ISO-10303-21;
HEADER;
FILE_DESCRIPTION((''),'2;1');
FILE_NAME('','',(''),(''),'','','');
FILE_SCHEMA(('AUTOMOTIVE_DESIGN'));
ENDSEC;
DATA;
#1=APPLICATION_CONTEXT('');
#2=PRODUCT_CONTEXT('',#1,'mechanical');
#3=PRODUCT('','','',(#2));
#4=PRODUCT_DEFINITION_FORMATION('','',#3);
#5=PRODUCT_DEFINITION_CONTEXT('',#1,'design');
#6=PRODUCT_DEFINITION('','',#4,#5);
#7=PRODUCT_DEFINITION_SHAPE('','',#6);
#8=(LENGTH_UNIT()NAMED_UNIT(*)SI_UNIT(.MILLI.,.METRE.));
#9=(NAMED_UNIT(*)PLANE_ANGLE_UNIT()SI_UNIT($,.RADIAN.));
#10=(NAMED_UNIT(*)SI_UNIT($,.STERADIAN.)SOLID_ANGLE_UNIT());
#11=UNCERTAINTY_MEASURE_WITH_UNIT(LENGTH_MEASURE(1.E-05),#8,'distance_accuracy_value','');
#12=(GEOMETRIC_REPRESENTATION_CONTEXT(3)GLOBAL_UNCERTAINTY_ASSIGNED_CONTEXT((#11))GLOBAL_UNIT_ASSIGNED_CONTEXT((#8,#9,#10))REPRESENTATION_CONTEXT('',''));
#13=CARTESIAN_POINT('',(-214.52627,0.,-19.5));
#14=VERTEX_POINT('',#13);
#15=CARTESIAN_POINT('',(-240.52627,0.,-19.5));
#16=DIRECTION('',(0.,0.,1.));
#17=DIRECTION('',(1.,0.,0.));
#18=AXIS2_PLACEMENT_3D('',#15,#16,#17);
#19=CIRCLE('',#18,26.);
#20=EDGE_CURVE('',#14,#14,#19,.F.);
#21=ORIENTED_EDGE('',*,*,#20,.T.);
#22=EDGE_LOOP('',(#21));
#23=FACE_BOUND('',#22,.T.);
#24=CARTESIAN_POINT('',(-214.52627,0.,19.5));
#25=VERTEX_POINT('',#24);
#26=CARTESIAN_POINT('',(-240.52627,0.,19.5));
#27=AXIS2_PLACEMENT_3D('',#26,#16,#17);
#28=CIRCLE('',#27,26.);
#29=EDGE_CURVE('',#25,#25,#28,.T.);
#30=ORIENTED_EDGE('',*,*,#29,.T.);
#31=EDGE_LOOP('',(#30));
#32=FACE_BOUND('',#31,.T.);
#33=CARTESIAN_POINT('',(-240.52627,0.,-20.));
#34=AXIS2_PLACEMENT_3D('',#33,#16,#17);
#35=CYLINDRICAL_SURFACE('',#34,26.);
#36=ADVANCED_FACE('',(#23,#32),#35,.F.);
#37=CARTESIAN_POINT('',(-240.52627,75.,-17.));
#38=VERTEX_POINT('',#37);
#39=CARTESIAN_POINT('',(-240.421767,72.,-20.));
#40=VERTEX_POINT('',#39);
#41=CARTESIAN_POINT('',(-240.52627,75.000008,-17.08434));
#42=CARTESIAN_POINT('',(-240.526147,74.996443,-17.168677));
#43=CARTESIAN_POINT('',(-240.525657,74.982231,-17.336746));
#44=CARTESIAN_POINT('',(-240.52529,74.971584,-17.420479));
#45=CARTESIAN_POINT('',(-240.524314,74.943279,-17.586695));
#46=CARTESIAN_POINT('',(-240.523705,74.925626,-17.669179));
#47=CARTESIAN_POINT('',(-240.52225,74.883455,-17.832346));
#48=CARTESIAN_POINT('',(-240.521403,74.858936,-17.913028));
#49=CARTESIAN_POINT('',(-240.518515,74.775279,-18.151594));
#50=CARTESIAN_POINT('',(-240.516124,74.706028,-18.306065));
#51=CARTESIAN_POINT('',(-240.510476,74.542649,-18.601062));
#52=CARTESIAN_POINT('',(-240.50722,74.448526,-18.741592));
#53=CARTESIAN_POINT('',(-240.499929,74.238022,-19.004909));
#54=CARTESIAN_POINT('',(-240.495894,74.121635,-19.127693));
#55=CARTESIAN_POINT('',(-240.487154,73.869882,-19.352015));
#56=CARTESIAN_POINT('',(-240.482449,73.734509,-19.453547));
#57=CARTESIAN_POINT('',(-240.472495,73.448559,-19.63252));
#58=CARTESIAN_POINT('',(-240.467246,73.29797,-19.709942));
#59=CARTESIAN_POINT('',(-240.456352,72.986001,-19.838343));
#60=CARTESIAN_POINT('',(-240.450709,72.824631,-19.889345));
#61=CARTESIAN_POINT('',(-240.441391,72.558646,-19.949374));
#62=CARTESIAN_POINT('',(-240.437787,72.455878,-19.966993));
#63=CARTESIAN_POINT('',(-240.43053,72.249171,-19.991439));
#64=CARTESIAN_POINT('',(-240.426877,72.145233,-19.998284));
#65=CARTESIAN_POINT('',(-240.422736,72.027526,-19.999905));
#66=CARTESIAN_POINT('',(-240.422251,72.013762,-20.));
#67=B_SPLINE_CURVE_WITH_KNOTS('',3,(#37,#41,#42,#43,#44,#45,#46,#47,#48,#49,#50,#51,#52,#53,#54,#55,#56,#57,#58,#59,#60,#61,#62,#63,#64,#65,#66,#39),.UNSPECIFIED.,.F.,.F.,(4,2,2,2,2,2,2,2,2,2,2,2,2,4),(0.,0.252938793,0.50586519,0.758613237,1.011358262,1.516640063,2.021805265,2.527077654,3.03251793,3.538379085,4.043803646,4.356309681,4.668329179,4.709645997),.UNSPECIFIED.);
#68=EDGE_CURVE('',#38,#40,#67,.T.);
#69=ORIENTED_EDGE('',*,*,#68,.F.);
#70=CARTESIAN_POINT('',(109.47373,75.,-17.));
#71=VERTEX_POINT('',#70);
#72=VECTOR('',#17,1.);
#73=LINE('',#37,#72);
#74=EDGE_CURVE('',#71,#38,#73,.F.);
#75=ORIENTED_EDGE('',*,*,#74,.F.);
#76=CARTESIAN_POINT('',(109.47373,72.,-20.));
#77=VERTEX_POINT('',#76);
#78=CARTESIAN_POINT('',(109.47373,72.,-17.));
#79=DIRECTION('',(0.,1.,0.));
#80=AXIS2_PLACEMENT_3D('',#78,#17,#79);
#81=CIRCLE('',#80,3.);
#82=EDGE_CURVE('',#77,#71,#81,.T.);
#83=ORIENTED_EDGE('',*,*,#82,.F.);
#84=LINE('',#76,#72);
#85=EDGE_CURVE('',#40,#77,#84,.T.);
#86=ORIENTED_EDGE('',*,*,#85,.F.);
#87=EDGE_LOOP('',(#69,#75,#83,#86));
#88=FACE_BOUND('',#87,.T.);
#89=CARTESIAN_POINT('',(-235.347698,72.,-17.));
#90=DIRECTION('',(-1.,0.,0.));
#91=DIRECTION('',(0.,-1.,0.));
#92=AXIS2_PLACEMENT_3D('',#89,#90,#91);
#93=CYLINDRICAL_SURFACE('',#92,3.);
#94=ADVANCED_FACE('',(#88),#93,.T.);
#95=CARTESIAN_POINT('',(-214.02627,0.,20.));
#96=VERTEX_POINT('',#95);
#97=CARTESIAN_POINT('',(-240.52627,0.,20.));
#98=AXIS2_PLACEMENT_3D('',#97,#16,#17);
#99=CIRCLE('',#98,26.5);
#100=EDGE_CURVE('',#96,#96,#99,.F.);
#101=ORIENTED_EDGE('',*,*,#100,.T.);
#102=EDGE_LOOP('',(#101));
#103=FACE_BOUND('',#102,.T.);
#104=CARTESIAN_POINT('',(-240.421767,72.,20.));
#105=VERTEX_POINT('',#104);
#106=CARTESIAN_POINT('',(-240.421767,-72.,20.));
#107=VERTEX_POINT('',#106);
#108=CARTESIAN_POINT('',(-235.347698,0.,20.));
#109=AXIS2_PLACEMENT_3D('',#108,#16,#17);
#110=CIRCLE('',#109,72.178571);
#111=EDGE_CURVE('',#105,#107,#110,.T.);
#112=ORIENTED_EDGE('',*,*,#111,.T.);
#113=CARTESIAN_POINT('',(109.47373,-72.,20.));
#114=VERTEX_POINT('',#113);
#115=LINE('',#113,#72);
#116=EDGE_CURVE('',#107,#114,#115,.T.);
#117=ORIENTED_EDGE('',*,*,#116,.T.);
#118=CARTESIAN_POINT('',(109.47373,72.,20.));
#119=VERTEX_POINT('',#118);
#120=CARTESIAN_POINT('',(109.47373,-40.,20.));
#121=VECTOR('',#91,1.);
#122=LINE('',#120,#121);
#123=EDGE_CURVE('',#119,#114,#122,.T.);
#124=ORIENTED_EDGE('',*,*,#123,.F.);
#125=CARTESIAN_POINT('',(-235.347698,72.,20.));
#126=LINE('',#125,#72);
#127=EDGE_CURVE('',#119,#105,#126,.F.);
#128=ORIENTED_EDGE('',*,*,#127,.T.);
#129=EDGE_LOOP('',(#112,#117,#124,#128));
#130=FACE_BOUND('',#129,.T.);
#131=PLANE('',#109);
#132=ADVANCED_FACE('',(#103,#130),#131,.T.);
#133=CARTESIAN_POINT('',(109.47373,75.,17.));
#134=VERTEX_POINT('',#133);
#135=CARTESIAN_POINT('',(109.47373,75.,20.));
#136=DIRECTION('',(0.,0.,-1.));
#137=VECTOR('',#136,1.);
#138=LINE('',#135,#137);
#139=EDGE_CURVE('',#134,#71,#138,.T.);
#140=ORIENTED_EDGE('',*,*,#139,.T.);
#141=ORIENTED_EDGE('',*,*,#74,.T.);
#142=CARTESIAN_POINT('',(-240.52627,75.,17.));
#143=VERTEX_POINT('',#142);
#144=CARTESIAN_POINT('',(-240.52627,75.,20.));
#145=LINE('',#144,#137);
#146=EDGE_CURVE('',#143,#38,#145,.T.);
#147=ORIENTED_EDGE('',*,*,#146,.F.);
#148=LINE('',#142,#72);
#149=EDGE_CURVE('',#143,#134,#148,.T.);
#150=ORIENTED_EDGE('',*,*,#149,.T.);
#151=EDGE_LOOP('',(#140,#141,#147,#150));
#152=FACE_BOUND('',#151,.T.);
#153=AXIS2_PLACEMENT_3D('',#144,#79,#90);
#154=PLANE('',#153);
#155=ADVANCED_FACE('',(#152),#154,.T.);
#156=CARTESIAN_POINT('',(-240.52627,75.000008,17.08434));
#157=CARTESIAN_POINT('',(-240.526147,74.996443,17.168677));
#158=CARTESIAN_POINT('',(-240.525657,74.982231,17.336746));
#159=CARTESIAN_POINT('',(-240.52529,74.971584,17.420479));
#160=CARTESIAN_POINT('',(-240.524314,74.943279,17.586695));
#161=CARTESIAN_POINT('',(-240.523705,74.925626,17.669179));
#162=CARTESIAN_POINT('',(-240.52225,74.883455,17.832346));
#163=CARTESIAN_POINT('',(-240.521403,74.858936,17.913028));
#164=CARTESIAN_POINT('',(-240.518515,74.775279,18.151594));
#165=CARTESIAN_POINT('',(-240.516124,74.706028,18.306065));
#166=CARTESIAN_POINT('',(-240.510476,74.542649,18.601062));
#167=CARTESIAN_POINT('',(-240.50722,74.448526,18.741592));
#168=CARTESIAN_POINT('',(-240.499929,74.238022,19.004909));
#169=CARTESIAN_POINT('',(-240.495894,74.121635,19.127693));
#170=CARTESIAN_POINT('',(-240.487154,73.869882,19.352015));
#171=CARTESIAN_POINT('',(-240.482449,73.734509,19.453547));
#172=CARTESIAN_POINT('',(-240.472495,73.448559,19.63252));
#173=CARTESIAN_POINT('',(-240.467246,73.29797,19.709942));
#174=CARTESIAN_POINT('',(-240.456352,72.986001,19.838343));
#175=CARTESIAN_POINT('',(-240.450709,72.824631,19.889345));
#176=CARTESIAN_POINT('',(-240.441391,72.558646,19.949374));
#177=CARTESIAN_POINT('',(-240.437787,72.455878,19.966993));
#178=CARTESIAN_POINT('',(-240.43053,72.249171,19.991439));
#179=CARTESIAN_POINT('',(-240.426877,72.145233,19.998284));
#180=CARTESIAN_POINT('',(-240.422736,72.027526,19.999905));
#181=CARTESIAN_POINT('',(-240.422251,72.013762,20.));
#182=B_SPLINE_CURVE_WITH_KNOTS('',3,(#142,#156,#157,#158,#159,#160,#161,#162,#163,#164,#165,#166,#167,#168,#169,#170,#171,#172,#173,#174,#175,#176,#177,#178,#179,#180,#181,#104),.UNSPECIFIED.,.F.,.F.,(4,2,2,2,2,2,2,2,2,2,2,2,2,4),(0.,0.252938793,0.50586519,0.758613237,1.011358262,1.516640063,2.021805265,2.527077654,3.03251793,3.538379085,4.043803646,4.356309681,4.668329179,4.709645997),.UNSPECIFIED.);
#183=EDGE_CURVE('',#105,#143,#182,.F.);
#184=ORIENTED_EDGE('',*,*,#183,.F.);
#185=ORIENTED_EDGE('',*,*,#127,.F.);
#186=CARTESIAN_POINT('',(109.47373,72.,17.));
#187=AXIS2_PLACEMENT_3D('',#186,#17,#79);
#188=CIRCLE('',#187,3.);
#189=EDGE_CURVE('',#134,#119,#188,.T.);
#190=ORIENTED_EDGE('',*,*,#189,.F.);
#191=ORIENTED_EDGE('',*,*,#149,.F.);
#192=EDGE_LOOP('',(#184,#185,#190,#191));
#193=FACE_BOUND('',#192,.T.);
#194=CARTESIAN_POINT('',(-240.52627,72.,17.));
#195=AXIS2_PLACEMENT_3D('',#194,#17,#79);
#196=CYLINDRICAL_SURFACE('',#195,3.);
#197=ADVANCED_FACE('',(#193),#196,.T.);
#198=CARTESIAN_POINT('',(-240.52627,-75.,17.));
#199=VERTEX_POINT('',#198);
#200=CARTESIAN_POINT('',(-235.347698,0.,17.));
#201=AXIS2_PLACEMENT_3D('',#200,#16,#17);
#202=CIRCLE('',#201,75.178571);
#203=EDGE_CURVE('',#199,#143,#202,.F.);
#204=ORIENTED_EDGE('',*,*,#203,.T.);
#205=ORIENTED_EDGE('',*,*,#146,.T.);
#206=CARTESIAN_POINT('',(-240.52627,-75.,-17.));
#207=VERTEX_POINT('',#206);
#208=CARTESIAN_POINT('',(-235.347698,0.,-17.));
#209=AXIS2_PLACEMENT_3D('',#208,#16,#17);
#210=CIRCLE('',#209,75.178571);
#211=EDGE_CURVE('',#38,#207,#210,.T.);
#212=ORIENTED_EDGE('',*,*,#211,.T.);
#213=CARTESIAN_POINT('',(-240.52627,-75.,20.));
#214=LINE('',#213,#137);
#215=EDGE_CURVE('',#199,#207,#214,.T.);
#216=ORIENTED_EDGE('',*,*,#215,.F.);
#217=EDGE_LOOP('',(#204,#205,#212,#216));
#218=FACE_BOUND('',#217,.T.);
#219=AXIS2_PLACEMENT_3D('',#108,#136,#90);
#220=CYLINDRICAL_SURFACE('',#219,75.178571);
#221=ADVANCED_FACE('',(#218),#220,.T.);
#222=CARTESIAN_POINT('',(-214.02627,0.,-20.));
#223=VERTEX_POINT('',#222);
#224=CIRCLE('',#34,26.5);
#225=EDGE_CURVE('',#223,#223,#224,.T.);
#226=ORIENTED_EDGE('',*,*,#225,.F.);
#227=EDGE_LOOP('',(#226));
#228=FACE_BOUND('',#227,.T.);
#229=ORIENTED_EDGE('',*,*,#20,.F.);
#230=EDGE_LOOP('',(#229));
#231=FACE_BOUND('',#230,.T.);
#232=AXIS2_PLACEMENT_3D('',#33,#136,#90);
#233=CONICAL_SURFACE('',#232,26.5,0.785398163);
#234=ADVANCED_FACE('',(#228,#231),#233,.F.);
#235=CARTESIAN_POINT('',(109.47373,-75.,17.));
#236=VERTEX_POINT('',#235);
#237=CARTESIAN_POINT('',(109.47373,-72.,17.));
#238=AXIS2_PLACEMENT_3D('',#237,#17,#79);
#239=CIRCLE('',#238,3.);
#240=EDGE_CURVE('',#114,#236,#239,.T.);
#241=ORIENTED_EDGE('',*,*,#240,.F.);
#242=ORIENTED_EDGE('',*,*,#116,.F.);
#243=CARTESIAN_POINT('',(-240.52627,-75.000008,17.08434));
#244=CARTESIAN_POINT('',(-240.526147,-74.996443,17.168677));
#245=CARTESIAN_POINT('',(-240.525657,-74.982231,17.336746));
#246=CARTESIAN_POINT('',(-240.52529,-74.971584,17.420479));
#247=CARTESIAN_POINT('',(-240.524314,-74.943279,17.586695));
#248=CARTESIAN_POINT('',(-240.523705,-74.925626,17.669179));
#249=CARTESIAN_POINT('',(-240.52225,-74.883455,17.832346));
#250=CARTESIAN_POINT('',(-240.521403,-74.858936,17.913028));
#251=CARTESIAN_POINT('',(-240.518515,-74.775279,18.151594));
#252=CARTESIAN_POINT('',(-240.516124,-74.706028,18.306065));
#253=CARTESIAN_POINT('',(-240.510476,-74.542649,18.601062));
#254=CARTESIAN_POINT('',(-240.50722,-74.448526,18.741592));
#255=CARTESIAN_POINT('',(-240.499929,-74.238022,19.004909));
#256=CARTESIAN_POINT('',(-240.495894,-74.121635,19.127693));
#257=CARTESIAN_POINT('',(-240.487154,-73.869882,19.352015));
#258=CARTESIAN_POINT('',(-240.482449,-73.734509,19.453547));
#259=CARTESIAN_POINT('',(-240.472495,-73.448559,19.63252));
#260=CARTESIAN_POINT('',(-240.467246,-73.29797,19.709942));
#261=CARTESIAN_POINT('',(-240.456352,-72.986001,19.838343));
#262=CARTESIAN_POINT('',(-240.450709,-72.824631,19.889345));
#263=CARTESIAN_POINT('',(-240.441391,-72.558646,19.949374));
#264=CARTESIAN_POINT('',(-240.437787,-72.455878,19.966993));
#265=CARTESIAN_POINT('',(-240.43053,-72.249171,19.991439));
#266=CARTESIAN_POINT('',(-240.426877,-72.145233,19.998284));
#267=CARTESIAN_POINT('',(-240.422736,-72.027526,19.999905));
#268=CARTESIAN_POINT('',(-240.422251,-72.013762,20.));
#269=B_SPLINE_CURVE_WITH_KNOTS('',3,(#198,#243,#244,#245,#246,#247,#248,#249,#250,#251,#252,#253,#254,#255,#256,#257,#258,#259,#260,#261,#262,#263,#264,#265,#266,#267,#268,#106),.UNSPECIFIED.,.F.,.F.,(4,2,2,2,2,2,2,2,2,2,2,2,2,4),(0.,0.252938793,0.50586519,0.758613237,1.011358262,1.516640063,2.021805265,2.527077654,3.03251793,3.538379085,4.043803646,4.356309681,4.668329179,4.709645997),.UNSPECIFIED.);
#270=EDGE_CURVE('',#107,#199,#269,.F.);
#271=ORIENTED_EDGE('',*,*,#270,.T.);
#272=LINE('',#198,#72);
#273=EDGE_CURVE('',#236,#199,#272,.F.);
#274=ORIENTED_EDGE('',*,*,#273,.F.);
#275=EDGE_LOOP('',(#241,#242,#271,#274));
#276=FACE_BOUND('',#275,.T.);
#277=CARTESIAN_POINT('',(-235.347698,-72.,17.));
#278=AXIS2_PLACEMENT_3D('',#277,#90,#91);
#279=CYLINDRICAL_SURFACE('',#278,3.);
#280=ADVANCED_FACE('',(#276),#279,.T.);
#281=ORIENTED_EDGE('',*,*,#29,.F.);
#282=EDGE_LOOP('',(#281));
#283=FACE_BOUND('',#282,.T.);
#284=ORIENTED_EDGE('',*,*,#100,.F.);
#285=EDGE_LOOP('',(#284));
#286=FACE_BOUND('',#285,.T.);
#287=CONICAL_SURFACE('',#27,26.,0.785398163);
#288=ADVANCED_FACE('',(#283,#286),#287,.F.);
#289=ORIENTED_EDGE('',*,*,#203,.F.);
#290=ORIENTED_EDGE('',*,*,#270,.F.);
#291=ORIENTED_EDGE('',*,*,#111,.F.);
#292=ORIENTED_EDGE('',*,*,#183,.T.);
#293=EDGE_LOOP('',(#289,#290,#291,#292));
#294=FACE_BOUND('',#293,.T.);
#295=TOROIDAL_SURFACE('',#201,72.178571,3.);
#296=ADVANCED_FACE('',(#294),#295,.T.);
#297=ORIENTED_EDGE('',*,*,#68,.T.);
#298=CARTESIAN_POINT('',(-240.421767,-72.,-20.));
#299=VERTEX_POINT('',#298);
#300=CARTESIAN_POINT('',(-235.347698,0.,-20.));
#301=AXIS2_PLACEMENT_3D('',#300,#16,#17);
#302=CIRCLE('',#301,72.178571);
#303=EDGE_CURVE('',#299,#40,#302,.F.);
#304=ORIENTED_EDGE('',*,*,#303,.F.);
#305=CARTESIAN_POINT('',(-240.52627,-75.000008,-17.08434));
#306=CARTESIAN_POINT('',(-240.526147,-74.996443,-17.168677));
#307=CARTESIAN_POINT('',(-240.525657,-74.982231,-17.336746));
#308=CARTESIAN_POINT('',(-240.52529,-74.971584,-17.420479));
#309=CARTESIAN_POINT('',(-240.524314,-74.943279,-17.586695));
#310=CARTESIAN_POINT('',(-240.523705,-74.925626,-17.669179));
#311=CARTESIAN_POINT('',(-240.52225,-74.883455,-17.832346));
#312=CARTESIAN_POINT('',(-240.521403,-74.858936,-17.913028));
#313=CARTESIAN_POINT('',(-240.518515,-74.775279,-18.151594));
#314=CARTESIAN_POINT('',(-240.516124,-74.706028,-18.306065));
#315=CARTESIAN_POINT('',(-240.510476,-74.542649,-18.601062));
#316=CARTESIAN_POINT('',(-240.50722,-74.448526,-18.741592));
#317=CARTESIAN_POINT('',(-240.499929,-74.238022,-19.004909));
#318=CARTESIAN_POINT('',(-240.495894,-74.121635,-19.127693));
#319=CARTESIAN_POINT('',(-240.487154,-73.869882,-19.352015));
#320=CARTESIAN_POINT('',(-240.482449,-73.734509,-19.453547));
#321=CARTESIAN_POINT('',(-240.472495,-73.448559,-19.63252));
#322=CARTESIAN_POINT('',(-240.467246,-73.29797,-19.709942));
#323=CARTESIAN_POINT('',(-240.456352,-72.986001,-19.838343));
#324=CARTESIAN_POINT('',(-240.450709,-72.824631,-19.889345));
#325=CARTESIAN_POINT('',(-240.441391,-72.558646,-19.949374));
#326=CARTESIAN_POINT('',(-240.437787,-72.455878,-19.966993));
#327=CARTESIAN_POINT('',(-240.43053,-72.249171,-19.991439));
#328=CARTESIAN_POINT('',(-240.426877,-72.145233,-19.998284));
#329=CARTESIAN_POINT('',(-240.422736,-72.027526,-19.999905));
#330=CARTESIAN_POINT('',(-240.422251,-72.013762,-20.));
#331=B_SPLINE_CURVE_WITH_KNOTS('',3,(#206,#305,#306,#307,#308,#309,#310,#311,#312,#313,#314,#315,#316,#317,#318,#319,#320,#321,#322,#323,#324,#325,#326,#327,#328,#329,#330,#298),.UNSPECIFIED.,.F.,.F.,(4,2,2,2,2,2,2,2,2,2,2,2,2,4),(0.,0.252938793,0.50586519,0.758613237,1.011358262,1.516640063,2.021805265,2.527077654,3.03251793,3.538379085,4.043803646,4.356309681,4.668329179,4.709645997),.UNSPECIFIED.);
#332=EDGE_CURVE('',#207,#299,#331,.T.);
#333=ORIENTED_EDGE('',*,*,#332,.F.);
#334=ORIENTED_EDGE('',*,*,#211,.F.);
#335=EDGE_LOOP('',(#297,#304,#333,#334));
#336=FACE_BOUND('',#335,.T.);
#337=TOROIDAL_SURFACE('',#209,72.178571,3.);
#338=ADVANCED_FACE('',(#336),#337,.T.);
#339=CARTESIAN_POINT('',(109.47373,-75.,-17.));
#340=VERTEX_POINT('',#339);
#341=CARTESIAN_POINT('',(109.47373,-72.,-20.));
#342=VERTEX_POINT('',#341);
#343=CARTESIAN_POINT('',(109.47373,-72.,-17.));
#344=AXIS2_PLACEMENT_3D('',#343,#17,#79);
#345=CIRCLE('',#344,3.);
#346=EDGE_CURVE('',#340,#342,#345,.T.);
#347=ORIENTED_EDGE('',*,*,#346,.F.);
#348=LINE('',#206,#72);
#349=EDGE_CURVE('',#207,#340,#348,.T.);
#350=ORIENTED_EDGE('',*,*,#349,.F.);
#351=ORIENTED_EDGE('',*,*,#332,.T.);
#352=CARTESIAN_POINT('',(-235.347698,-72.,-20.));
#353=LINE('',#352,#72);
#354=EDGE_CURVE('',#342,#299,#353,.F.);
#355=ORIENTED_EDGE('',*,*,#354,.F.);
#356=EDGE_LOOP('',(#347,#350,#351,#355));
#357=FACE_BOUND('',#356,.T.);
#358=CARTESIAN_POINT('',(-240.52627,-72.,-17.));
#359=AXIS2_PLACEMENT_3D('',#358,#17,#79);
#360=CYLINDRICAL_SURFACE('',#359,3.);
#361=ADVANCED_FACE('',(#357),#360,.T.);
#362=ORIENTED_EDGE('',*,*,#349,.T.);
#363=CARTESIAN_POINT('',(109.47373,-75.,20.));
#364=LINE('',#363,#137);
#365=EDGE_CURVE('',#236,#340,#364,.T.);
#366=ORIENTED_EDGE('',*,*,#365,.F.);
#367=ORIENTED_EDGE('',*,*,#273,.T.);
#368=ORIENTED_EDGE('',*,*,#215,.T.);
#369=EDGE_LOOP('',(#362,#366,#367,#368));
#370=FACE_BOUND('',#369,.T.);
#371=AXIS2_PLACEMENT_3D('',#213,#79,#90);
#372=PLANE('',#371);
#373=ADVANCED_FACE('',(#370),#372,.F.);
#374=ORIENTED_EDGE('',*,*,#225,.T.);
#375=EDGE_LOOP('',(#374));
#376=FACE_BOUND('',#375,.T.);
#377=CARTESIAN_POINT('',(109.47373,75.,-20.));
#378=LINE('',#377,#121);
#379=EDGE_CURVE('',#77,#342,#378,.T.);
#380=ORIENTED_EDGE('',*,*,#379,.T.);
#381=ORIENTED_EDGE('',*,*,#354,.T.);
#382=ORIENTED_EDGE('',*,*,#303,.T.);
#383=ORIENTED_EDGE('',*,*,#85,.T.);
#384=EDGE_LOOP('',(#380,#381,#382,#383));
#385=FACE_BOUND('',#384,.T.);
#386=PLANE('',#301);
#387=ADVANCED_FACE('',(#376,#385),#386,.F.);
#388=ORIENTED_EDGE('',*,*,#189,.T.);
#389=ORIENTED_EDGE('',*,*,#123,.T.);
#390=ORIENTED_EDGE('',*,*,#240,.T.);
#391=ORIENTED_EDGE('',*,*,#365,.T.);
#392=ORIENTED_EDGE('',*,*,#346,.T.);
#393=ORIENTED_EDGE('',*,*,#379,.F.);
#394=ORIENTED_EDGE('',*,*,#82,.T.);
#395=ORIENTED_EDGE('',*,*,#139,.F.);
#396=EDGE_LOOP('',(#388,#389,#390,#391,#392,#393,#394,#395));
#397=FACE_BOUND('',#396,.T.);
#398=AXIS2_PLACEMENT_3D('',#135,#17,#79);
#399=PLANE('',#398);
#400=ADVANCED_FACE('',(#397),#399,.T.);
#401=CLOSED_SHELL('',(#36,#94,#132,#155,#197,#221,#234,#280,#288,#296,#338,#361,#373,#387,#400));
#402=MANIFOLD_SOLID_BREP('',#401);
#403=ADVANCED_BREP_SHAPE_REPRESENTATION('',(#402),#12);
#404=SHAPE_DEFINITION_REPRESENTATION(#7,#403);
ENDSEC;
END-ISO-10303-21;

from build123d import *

# Parameters (mm, degrees)
BOSS_EXTRUDE1_DEPTH = 20
SKETCH2_R           = 26
CUT_EXTRUDE1_DEPTH  = 40
SKETCH3_W           = 155.054117715
SKETCH3_H           = 119.807274711
BOSS_EXTRUDE2_DEPTH = 40
FILLET1_R           = 3
CHAMFER1_SIZE       = 0.5


with BuildPart() as part:
    # Sketch1 → Boss-Extrude1 (new, symmetric)
    with BuildSketch(Plane.XY):
        with BuildLine():
            Line((-240.526269825, 75), (109.473730175, 75))
            Line((109.473730175, 75), (109.473730175, 40))
            Line((109.473730175, 40), (-20.526269825, 40))
            Line((-20.526269825, 40), (-20.526269825, -40))
            Line((-20.526269825, -40), (109.473730175, -40))
            Line((109.473730175, -40), (109.473730175, -75))
            Line((109.473730175, -75), (-240.526269825, -75))
            ThreePointArc((-240.526269825, -75), (-310.526269825, 0), (-240.526269825, 75))
        make_face()
    extrude(amount=BOSS_EXTRUDE1_DEPTH, both=True)

    # Sketch2 → Cut-Extrude1 (cut)
    with BuildSketch(Plane.XY.offset(20)):
        with Locations((-240.526269825, 0)):
            Circle(SKETCH2_R)
    extrude(amount=-CUT_EXTRUDE1_DEPTH, mode=Mode.SUBTRACT)

    # Sketch3 → Boss-Extrude2 (add, through all)
    with BuildSketch(Plane.XY.offset(20)):
        with Locations((31.946671317, -2.166338184)):
            Rectangle(SKETCH3_W, SKETCH3_H)
    extrude(amount=-BOSS_EXTRUDE2_DEPTH)

    # Fillet1
    # the kernel refuses this fillet: 3 mm, written as the material it takes off along each edge
    with BuildSketch(Plane(origin=(116.973730175, -75, -20), x_dir=(0, 0, 1), z_dir=(-1, 0, 0)), Plane(origin=(116.973730175, -75, 20), x_dir=(0, 1, 0), z_dir=(-1, 0, 0)), Plane(origin=(-248.026269825, 75, -20), x_dir=(0, 0, 1), z_dir=(1, 0, 0))) as fillet1_piece_1:
        with BuildLine():
            CenterArc((FILLET1_R, FILLET1_R), FILLET1_R, 180, 90)
            Line((0, FILLET1_R), (0, 0))
            Line((0, 0), (FILLET1_R, 0))
        make_face()
    extrude(amount=365, mode=Mode.SUBTRACT)
    with BuildSketch(Plane(origin=(-235.347698397, 0, -20), x_dir=(0.03096596678063506, -0.9995204394615153, 0), z_dir=(0.9995204394615153, 0.03096596678063506, 0))) as fillet1_piece_2:
        with BuildLine():
            CenterArc((75.178571429 - FILLET1_R, -FILLET1_R), FILLET1_R, 0, 90)
            Line((75.178571429, -FILLET1_R), (75.178571429, 0))
            Line((75.178571429, 0), (75.178571429 - FILLET1_R, 0))
        make_face()
    revolve(axis=Axis((-235.347698397, 0, -20), (0, 0, -1)), revolution_arc=183.549005749, mode=Mode.SUBTRACT)
    with BuildSketch(Plane(origin=(-248.026269825, 75, 20), x_dir=(0, 0, -1), z_dir=(1, 0, 0))) as fillet1_piece_3:
        with BuildLine():
            CenterArc((FILLET1_R, -FILLET1_R), FILLET1_R, 90, 90)
            Line((0, -FILLET1_R), (0, 0))
            Line((0, 0), (FILLET1_R, 0))
        make_face()
    extrude(amount=365, mode=Mode.SUBTRACT)
    with BuildSketch(Plane(origin=(-235.347698397, 0, 20), x_dir=(0.03096596678063506, -0.9995204394615153, 0), z_dir=(0.9995204394615153, 0.03096596678063506, 0))) as fillet1_piece_4:
        with BuildLine():
            CenterArc((75.178571429 - FILLET1_R, FILLET1_R), FILLET1_R, 270, 90)
            Line((75.178571429, FILLET1_R), (75.178571429, 0))
            Line((75.178571429, 0), (75.178571429 - FILLET1_R, 0))
        make_face()
    revolve(axis=Axis((-235.347698397, 0, 20), (0, 0, -1)), revolution_arc=183.549005749, mode=Mode.SUBTRACT)

    # Chamfer1
    chamfer1_edges = [part.edges().sort_by_distance(p)[0] for p in [
        (-266.526269825, 0, -20),
        (-266.526269825, 0, 20),
    ]]
    chamfer(chamfer1_edges, length=CHAMFER1_SIZE)


solid = part.part
